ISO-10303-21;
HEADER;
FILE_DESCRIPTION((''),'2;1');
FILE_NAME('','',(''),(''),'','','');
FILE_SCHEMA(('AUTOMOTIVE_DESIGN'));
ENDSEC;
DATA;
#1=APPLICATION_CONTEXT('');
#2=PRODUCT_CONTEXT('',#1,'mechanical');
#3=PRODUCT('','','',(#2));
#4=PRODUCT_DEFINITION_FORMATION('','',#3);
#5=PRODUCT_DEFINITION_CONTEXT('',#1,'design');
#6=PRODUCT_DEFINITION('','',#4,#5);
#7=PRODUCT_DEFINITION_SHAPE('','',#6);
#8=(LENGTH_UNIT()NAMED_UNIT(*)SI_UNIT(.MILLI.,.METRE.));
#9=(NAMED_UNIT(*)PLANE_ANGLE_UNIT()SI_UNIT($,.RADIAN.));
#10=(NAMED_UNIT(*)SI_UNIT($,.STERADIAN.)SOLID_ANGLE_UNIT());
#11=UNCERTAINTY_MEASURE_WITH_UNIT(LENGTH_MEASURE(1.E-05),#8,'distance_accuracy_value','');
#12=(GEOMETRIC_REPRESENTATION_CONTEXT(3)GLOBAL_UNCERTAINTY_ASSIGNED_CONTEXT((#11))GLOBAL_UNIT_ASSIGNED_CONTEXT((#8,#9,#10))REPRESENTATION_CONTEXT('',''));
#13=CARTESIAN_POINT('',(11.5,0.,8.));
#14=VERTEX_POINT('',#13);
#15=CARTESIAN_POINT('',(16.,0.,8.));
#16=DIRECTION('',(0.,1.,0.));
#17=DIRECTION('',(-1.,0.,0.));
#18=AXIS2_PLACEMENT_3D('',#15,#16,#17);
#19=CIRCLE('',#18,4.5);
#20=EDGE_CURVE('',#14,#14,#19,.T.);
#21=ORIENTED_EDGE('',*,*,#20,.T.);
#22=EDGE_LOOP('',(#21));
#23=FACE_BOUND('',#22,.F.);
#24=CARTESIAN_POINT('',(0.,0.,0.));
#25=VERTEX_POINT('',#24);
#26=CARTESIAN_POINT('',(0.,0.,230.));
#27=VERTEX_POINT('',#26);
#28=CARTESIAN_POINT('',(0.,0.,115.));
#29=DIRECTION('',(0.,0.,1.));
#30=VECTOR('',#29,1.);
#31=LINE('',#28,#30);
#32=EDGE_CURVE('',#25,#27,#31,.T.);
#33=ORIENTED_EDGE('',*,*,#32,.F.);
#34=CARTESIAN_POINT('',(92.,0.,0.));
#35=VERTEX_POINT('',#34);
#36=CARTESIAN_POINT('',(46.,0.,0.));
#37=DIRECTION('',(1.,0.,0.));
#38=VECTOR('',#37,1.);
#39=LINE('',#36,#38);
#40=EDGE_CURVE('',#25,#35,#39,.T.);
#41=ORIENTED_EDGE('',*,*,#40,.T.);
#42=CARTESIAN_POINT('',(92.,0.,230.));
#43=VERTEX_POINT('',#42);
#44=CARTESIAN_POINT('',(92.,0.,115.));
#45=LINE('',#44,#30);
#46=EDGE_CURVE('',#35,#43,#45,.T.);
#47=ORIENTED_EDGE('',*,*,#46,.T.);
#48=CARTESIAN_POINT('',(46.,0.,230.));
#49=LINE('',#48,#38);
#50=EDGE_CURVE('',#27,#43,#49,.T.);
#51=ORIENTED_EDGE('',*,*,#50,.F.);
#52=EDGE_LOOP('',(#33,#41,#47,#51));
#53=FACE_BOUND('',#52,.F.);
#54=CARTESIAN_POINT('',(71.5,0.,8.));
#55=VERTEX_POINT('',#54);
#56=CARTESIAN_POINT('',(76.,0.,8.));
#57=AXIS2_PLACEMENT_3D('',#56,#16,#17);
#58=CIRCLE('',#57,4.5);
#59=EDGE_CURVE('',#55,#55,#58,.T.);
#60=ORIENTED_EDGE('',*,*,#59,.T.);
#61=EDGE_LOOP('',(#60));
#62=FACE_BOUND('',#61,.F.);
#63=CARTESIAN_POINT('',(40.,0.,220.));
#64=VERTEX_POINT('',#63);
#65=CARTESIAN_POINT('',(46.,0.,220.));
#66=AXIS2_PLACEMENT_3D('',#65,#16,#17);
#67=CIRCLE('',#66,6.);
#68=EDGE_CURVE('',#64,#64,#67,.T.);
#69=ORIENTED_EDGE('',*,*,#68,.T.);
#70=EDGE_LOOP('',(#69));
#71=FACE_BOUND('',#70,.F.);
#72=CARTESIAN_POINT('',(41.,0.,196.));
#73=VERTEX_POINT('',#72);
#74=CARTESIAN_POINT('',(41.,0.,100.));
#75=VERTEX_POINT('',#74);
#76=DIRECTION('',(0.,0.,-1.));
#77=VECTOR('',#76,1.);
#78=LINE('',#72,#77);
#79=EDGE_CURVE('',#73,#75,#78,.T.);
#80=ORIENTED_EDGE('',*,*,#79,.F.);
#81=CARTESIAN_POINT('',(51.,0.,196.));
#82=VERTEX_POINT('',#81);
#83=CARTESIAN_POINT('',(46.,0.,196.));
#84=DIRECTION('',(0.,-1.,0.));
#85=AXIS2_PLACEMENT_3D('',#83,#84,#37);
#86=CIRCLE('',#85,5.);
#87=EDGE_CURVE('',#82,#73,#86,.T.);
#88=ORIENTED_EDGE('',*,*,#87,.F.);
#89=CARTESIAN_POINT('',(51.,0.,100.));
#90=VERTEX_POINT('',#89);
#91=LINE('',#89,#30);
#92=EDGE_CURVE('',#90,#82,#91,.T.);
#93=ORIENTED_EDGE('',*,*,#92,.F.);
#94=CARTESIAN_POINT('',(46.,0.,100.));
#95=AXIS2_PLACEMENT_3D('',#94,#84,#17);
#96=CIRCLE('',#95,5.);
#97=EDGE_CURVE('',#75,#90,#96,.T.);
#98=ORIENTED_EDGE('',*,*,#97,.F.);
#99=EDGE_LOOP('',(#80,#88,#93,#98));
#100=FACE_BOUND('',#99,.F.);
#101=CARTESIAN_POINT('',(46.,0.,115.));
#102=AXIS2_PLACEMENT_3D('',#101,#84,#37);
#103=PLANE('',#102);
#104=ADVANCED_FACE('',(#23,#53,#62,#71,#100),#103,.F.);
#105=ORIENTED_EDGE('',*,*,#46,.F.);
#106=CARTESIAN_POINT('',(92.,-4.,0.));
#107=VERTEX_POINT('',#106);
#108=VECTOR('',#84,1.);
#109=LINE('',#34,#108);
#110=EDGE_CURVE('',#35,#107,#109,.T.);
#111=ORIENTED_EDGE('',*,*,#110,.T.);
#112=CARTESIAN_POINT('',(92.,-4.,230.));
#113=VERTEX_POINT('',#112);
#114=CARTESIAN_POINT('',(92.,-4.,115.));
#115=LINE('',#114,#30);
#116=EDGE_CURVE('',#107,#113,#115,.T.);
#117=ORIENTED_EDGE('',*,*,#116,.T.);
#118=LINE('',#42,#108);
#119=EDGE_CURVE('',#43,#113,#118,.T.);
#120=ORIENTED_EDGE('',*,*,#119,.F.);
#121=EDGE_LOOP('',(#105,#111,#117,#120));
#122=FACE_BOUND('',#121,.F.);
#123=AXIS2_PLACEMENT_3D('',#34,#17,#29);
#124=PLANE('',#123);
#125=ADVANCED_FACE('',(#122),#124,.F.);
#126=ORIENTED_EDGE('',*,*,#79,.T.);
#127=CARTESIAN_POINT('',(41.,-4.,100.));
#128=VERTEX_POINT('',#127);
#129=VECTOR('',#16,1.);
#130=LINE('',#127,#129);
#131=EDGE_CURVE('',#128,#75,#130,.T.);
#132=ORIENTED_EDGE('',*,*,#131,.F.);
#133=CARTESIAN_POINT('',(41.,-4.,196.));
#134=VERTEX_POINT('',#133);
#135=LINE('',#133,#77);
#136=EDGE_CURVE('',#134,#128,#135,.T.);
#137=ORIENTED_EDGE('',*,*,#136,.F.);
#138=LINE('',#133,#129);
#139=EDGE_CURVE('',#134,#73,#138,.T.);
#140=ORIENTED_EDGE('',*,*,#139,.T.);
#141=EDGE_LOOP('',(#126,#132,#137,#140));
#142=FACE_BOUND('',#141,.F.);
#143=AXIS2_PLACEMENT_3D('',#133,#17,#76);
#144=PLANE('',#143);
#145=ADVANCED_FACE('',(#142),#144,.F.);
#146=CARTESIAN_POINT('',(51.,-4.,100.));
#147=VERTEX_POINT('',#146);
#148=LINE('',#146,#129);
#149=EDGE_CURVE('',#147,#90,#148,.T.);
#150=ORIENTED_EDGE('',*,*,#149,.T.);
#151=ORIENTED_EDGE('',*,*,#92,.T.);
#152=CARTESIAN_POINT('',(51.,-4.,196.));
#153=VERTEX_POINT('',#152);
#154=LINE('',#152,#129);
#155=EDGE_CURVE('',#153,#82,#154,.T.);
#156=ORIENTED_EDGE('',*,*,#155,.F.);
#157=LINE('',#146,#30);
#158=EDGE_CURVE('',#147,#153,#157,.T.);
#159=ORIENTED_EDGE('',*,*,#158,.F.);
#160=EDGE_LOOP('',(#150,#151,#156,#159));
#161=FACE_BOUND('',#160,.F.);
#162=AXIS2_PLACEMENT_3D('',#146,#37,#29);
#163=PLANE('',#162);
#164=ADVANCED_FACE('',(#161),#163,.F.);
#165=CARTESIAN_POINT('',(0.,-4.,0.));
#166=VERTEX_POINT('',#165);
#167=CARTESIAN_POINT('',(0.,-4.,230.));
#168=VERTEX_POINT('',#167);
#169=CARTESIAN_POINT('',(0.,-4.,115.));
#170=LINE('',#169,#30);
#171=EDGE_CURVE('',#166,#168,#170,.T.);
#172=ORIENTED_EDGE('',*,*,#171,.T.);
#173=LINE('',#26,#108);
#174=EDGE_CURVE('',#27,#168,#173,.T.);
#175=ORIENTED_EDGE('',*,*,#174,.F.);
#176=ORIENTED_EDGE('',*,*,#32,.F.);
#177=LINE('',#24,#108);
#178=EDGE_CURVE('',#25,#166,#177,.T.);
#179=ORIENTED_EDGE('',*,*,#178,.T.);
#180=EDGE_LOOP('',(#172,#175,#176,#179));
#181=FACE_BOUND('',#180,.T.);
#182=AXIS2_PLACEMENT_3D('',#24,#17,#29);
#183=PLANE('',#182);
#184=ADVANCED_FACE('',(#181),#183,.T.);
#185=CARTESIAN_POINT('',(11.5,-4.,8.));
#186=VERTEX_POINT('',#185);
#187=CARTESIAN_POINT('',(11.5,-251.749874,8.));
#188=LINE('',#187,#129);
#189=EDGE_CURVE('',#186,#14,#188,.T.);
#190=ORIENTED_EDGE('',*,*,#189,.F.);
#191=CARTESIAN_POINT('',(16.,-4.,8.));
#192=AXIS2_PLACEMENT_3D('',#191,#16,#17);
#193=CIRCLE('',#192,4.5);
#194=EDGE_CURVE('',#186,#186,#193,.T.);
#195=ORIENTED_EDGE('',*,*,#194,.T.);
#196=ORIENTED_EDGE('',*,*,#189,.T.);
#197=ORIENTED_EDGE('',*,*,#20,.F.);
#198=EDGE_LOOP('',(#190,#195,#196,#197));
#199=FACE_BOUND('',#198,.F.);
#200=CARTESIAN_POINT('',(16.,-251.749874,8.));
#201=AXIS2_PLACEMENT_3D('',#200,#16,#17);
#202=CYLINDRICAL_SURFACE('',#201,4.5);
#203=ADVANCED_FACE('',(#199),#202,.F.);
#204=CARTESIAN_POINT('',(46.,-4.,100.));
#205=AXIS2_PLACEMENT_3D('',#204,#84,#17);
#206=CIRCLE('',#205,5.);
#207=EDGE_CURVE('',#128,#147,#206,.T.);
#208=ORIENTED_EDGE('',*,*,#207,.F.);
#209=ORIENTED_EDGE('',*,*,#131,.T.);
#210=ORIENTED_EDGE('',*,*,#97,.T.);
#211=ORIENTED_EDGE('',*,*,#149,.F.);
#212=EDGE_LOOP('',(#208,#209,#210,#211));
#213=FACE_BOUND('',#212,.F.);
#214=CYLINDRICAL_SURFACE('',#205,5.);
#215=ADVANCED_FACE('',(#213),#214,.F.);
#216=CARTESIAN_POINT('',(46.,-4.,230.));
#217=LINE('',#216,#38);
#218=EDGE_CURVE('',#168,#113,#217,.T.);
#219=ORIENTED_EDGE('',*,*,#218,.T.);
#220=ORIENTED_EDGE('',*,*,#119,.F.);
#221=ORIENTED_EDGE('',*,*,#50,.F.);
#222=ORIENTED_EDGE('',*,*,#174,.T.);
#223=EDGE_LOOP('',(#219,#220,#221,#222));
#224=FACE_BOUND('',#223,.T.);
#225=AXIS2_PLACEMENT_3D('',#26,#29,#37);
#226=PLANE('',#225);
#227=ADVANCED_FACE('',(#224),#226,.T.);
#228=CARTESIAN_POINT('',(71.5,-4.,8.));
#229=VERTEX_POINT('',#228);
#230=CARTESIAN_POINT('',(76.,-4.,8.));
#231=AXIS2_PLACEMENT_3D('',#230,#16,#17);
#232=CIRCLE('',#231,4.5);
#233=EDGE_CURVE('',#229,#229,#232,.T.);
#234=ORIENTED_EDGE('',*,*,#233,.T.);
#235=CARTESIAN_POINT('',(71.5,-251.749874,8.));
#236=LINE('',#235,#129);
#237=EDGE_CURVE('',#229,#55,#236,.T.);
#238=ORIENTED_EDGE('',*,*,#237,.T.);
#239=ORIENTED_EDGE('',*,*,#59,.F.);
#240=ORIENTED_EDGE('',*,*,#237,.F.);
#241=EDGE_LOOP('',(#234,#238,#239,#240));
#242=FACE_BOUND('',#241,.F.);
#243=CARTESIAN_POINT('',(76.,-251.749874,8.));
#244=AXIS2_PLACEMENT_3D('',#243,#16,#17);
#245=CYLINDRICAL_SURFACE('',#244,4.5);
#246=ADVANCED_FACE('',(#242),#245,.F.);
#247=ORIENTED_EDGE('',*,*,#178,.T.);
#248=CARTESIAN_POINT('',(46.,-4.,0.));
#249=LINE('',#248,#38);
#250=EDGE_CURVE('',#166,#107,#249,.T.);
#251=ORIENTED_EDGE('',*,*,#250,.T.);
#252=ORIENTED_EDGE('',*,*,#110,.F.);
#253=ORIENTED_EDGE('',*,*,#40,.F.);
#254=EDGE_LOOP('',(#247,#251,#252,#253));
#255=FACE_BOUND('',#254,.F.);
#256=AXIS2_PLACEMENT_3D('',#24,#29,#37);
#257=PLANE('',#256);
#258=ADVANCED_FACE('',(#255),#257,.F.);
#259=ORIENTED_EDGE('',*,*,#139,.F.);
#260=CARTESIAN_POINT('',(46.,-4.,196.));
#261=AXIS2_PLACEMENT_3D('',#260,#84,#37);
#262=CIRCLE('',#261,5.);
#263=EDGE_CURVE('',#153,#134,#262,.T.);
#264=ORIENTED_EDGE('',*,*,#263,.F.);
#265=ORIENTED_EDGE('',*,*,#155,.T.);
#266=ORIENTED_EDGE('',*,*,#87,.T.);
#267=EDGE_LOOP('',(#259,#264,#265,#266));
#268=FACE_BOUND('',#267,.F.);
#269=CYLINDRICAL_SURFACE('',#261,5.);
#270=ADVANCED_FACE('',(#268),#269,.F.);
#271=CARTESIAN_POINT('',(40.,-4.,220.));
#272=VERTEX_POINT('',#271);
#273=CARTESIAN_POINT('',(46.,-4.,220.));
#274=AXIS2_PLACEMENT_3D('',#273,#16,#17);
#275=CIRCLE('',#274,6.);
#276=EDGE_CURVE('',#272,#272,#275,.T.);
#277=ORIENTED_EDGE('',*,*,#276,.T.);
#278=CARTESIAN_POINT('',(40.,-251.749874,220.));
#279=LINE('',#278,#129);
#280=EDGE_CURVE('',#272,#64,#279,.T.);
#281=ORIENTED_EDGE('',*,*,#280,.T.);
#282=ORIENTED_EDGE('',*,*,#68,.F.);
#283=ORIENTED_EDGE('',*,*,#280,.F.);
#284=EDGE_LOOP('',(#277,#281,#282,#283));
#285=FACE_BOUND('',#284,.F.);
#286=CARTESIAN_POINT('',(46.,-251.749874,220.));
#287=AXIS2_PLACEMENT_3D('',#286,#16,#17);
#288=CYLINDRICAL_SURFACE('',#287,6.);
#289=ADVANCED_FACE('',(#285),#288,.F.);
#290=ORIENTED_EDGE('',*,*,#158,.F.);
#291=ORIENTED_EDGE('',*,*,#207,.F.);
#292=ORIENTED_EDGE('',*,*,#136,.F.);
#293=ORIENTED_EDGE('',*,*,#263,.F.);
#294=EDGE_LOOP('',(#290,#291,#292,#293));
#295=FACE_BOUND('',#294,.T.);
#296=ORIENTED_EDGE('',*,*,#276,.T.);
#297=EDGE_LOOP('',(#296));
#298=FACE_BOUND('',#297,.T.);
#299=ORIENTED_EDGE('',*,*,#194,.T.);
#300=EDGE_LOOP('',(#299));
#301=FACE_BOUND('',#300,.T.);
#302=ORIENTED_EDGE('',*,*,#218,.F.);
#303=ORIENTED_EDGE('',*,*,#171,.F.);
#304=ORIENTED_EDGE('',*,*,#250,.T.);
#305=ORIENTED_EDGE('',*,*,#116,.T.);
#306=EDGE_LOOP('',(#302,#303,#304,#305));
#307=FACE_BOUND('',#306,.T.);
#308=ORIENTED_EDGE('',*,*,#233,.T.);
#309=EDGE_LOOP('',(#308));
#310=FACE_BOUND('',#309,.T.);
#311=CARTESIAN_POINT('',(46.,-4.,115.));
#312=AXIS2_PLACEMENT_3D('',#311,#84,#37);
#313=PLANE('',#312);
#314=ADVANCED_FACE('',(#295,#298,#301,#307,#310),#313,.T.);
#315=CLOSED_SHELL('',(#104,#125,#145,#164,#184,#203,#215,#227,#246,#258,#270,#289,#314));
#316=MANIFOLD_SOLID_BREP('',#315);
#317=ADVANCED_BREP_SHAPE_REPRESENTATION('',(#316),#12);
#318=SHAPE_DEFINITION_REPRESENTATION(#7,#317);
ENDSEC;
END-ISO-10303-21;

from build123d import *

# Parameters (mm, degrees)
F0_W     = 92
F0_H     = 230
F1_DEPTH = 4
F3_D     = 9
F4_D     = 12
F6_DEPTH = 4


with BuildPart() as f1:
    # F0 (on Front) → F1 (new body)
    with BuildSketch(Plane.XZ):
        with Locations((46, 115)):
            Rectangle(F0_W, F0_H)
    extrude(amount=F1_DEPTH)

    # F3 (through all)
    with Locations(Plane.XZ.offset(4)):
        with Locations((16, 8), (76, 8)):
            Hole(F3_D / 2)

    # F4 (through all)
    with Locations(Plane.XZ.offset(4)):
        with Locations((46, 220)):
            Hole(F4_D / 2)

    # F5 (on face) → F6 (cut, through all)
    with BuildSketch(Plane.XZ.offset(4)):
        with BuildLine():
            ThreePointArc((41, 100), (46, 95), (51, 100))
            Line((51, 100), (51, 196))
            ThreePointArc((51, 196), (46, 201), (41, 196))
            Line((41, 196), (41, 100))
        make_face()
    extrude(amount=-F6_DEPTH, mode=Mode.SUBTRACT)


solid = f1.part
